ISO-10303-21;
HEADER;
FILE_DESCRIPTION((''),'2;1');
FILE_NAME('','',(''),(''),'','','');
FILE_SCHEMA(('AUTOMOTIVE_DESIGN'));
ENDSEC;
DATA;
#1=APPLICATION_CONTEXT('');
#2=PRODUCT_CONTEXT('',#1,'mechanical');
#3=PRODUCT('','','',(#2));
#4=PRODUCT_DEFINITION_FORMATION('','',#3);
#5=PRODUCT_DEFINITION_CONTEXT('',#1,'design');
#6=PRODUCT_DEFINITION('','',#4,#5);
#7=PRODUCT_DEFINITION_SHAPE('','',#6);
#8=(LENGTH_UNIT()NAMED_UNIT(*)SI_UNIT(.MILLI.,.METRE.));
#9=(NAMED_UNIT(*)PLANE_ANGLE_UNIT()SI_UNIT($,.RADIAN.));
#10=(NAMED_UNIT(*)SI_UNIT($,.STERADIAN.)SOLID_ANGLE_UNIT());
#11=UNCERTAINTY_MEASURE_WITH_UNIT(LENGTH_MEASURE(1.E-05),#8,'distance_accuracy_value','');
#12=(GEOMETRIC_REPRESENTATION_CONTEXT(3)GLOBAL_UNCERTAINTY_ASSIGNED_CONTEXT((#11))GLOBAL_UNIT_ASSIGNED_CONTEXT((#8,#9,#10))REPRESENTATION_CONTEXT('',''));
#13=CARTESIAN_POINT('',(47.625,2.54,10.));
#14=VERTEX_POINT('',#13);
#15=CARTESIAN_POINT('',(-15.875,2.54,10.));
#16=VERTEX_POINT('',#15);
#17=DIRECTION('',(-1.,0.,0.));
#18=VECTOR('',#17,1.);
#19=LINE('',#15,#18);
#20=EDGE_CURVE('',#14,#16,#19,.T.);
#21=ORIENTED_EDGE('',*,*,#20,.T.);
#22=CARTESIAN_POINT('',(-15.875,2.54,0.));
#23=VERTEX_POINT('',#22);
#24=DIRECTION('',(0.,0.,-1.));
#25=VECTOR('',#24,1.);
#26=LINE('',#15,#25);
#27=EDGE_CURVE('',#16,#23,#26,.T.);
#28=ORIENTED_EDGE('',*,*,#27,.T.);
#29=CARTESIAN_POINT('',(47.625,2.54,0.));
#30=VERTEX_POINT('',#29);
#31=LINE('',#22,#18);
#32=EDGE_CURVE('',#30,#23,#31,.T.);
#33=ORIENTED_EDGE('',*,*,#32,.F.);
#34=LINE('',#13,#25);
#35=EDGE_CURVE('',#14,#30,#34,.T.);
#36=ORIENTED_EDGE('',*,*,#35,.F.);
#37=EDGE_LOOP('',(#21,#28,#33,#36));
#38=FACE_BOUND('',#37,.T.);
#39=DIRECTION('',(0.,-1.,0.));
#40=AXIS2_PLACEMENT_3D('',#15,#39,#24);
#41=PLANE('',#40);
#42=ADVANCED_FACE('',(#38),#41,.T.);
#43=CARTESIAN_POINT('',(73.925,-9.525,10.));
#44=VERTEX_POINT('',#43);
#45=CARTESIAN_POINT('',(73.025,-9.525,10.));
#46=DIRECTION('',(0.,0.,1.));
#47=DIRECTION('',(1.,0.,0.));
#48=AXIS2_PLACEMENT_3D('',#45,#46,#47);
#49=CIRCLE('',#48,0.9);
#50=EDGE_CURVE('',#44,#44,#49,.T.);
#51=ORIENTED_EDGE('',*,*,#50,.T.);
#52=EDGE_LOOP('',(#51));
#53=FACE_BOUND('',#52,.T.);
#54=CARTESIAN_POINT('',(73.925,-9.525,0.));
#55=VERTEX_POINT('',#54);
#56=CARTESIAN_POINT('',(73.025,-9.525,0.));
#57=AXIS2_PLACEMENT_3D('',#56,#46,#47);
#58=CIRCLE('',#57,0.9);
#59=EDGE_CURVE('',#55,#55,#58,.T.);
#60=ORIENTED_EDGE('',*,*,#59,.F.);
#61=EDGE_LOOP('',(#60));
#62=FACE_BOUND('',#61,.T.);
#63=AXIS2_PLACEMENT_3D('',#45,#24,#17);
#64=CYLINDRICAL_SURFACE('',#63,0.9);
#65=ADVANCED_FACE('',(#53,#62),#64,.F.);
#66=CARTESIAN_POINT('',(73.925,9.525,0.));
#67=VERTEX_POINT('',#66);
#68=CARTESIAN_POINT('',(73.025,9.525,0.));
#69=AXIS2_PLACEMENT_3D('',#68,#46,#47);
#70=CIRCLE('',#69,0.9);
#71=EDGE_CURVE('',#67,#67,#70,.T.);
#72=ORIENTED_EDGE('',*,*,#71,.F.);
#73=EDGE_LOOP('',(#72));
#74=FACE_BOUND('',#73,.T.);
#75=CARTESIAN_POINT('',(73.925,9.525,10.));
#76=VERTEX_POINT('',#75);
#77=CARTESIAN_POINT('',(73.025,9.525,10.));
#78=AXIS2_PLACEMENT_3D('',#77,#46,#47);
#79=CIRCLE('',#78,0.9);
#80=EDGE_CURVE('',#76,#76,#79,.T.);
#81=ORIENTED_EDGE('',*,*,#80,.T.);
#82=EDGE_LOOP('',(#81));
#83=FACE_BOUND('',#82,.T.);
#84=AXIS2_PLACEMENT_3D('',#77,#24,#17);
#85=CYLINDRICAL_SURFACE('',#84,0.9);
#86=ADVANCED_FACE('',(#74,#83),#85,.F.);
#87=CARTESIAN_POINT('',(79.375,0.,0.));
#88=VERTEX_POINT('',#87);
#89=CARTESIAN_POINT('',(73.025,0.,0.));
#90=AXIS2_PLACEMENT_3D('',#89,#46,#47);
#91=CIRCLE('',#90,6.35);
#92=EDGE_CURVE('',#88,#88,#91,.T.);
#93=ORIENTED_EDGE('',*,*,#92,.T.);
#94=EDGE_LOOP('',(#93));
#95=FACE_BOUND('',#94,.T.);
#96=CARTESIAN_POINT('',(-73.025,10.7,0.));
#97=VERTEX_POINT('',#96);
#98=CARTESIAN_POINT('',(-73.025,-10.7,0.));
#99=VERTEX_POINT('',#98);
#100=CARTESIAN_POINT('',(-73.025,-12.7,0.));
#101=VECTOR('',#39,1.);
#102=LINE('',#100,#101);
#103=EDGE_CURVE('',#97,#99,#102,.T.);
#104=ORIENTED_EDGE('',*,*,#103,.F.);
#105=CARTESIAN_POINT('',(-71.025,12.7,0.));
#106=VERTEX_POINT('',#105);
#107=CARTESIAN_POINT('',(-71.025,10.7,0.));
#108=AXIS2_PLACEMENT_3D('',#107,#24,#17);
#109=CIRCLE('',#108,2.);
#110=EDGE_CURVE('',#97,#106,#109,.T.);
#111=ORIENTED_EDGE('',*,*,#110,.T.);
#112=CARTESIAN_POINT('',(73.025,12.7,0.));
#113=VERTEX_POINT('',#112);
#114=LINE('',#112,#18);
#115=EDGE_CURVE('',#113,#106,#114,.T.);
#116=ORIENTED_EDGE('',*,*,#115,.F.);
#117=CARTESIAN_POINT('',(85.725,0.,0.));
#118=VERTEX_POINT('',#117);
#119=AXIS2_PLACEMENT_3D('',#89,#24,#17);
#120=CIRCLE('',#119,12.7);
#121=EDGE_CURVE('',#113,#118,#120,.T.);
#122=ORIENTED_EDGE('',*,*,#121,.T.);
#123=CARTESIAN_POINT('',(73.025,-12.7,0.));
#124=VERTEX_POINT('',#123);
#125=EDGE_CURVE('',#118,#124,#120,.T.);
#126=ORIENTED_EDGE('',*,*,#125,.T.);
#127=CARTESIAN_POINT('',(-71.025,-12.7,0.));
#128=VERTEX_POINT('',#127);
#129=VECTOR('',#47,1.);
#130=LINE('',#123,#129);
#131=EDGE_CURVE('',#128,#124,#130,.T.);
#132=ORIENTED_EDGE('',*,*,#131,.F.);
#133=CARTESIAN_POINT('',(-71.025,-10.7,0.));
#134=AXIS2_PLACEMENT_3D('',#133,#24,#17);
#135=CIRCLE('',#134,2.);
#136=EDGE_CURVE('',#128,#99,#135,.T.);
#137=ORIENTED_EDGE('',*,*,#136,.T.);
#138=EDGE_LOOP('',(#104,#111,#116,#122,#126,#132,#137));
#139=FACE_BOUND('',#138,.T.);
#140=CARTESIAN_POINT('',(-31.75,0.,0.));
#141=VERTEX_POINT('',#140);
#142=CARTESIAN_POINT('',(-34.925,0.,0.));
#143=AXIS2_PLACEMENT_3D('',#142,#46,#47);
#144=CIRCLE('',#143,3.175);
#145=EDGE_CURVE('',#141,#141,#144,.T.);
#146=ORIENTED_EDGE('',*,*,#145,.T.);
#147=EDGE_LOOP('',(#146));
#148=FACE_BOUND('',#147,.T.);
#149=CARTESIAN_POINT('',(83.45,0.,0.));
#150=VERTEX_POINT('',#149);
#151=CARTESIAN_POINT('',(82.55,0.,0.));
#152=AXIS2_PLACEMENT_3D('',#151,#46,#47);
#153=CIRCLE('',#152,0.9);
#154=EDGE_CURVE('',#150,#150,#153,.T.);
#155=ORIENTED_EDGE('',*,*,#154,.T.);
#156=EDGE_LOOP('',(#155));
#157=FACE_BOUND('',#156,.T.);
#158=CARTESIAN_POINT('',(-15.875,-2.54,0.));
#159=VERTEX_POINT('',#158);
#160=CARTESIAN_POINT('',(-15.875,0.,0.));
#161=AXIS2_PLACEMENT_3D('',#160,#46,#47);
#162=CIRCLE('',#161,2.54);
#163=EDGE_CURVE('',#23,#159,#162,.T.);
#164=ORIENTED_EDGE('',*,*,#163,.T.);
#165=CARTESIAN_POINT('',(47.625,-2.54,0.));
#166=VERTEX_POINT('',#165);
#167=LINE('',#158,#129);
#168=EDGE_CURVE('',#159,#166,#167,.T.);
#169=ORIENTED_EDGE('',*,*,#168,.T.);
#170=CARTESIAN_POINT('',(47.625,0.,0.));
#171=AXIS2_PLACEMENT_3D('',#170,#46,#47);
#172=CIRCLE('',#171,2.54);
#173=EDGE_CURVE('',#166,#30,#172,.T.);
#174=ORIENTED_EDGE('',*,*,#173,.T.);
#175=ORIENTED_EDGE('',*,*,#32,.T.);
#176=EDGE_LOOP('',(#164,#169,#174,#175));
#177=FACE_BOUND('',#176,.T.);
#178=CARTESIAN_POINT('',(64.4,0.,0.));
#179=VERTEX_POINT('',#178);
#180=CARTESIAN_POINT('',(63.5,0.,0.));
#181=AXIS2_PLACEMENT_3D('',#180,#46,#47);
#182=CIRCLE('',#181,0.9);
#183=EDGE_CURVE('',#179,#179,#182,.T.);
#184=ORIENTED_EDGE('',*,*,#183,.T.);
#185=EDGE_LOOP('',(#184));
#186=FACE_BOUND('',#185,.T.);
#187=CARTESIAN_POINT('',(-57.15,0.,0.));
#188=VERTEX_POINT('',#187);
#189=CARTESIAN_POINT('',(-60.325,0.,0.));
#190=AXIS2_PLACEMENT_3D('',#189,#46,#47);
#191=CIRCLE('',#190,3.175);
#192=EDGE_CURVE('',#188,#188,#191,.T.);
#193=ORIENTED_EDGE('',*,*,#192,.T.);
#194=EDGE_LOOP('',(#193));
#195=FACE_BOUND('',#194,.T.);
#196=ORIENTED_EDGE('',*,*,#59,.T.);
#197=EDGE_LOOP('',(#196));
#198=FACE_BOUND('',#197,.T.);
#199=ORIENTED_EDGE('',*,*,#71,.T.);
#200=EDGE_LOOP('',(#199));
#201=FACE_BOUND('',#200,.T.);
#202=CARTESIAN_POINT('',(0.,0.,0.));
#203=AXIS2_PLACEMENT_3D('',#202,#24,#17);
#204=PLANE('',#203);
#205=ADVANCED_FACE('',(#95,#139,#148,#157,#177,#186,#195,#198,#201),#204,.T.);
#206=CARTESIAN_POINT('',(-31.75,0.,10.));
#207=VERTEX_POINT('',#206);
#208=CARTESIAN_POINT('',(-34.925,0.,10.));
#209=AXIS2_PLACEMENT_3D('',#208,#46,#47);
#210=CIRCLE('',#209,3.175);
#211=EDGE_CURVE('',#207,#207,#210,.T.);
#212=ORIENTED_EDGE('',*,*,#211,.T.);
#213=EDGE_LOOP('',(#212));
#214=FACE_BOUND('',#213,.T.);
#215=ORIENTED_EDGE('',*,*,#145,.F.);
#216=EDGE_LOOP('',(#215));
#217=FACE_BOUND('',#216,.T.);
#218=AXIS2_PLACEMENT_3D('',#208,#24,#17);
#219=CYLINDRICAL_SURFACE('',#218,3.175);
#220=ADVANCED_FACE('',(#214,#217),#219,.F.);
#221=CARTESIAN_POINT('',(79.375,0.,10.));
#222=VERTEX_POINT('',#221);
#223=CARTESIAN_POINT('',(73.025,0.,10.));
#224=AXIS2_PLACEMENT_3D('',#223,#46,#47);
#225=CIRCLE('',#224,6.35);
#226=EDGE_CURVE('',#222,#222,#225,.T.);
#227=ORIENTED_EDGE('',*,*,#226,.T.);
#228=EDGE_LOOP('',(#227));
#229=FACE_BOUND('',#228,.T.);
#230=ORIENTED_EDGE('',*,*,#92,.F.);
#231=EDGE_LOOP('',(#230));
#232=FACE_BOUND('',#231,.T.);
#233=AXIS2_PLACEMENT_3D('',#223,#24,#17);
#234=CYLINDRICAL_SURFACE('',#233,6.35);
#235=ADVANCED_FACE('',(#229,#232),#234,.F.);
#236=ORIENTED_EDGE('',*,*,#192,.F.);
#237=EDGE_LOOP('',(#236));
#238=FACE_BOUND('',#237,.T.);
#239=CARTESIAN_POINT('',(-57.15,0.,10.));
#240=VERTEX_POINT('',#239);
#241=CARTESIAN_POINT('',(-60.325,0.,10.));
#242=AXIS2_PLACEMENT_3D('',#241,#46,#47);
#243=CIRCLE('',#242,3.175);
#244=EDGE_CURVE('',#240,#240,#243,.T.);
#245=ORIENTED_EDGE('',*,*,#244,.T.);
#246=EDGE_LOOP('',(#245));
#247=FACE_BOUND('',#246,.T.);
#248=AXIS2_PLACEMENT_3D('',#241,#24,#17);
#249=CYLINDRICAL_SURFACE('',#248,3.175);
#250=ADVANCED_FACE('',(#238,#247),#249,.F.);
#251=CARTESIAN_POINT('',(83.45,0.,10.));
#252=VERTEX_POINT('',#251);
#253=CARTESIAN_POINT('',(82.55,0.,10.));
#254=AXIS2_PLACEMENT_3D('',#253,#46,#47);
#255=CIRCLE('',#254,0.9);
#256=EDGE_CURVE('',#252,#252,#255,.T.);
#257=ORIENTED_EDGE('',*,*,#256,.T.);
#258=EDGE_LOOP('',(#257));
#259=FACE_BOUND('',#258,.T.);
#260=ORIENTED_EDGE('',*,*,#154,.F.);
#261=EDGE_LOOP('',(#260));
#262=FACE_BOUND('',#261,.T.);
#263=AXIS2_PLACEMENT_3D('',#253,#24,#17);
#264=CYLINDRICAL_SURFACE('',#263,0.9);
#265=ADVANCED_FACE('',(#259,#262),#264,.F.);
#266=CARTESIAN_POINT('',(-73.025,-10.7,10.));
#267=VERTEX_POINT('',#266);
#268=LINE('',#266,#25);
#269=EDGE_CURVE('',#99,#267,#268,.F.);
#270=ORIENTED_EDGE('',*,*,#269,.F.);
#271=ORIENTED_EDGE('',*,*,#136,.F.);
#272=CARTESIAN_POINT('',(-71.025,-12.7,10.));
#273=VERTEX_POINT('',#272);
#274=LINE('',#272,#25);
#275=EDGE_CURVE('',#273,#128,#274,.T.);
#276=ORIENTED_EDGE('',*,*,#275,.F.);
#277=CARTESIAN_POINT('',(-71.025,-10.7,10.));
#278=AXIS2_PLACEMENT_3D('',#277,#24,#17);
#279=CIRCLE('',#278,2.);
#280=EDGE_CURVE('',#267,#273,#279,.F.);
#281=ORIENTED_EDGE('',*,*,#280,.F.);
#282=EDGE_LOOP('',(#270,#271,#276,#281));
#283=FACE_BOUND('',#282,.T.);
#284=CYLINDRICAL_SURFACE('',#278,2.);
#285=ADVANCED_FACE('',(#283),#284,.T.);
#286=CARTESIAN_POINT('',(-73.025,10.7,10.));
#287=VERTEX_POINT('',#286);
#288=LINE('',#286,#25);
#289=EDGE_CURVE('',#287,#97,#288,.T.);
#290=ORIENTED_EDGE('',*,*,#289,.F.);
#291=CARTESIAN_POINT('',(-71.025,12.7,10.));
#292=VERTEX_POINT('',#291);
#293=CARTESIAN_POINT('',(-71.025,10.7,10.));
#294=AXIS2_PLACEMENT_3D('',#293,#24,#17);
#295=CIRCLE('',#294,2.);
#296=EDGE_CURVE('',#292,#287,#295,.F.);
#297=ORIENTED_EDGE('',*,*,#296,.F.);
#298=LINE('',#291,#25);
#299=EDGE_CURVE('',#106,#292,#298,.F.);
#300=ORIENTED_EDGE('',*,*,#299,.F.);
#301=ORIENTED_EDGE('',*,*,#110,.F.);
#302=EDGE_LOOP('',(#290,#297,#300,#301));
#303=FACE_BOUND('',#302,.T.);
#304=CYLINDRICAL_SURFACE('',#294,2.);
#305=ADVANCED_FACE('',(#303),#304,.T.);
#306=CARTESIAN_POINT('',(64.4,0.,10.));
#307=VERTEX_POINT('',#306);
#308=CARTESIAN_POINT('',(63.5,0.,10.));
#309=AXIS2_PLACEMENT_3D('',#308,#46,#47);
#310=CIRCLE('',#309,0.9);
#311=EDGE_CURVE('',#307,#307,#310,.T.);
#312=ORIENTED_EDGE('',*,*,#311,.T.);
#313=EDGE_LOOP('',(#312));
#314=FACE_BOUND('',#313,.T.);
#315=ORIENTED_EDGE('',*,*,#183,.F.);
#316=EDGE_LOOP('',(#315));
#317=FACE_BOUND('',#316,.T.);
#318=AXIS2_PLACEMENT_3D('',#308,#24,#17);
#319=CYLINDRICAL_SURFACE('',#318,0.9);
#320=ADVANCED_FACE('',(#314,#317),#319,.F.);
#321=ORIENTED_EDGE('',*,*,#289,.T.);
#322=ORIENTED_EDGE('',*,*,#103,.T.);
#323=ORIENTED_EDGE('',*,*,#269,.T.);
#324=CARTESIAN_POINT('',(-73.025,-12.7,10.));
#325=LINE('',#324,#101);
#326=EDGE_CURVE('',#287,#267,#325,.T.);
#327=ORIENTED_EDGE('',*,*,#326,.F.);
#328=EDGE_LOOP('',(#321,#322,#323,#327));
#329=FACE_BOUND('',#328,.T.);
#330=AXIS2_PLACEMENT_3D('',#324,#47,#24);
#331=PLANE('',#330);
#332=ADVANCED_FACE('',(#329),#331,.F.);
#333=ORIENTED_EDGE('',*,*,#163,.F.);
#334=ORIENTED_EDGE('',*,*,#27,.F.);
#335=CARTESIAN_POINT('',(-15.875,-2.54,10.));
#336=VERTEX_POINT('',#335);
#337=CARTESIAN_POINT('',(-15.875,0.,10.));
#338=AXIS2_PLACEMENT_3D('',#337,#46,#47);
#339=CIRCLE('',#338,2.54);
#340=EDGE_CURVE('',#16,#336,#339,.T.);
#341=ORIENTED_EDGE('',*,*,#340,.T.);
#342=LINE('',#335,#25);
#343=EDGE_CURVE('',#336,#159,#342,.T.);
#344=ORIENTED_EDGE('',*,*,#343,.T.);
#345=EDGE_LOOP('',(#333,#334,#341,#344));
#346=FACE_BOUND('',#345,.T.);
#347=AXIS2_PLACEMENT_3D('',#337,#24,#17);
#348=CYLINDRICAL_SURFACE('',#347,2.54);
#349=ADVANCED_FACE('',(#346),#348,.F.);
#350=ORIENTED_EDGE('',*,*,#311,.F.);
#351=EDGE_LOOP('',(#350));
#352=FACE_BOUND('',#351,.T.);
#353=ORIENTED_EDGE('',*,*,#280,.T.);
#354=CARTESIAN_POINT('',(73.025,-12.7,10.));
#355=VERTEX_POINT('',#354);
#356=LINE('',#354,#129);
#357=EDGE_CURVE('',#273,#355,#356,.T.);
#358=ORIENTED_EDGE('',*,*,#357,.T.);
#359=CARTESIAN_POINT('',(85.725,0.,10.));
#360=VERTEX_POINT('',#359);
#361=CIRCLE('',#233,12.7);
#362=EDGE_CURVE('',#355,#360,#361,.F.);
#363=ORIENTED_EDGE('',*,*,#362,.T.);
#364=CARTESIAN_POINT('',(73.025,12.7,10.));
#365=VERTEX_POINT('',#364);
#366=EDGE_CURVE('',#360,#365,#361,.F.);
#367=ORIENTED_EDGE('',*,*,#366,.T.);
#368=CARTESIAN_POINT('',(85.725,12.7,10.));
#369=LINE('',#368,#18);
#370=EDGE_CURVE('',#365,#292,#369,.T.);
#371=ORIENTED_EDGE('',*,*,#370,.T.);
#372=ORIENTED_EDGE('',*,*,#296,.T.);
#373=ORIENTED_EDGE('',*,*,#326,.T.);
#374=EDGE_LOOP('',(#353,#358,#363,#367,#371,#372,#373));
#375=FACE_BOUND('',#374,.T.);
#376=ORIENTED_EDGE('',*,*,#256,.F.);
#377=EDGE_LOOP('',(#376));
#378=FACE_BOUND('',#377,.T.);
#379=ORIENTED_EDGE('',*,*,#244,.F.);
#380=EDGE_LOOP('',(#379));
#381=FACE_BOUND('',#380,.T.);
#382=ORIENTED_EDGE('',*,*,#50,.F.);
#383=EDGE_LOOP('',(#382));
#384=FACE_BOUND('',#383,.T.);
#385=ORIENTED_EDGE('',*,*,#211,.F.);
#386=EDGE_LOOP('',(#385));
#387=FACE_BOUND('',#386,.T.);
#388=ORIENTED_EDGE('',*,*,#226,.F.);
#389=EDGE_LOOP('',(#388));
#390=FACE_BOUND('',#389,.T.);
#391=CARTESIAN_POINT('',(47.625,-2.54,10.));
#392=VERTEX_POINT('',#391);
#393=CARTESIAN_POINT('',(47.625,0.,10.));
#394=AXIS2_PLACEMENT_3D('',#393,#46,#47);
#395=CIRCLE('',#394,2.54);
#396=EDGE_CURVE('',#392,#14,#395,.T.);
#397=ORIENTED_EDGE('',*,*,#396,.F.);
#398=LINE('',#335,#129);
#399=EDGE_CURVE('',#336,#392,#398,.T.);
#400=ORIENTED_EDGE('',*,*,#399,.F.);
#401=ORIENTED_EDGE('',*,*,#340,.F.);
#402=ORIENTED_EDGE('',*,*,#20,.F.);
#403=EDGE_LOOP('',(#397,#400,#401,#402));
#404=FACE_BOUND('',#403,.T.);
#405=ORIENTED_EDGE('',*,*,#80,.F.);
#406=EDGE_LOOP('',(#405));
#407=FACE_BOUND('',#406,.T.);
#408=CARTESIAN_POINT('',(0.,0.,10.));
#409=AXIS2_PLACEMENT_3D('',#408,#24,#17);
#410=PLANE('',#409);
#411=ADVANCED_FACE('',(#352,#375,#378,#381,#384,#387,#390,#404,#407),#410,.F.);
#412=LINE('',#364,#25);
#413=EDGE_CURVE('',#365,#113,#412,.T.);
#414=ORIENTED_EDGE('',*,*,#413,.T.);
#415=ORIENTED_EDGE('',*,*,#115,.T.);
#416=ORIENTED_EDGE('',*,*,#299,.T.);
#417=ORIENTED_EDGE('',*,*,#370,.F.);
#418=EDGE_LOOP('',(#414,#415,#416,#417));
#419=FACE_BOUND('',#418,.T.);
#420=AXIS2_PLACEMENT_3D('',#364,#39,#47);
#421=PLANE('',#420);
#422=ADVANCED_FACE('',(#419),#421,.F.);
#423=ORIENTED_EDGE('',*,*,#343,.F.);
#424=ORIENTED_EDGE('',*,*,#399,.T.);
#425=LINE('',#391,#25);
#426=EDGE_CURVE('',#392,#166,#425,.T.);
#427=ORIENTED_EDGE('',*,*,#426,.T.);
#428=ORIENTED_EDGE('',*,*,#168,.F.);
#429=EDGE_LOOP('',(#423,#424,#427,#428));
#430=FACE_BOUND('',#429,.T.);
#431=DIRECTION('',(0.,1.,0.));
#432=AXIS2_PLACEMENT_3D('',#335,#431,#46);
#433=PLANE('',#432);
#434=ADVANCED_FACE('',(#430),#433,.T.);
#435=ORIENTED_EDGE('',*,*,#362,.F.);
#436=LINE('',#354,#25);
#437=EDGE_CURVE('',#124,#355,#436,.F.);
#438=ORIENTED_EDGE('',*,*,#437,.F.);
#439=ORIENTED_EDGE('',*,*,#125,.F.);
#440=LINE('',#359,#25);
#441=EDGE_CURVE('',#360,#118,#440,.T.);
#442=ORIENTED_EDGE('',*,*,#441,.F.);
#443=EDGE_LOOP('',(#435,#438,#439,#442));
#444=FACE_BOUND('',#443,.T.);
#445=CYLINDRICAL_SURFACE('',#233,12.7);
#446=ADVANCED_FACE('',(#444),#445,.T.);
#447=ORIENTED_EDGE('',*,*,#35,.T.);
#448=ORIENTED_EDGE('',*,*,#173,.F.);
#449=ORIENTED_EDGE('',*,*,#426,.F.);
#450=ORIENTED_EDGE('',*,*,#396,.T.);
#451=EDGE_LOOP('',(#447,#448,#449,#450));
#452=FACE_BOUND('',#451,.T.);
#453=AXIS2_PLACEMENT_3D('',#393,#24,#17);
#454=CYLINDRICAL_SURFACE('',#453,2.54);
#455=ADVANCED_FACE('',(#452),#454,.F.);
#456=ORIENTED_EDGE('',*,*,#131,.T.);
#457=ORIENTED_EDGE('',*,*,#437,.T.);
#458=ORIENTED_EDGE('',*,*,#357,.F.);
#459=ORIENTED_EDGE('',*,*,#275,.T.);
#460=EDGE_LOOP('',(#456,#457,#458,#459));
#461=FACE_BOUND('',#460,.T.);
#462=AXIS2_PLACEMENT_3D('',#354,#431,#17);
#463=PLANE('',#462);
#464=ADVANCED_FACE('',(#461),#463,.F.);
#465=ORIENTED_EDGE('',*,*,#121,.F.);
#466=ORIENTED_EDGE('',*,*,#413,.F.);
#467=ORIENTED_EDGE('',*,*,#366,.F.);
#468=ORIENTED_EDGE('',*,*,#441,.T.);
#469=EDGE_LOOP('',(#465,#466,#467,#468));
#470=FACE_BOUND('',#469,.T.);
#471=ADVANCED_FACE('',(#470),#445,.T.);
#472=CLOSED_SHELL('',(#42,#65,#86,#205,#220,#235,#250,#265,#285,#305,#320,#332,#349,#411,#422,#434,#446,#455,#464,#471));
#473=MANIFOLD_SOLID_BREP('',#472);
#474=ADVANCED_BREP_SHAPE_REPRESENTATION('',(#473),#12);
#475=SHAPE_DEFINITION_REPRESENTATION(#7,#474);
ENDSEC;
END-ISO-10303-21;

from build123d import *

# Parameters (mm, degrees)
SKETCH1_R           = 3.175
SKETCH1_R_2         = 6.35
SKETCH1_R_3         = 0.9
BOSS_EXTRUDE1_DEPTH = 10
FILLET2_R           = 2
FILLET3_R           = 12.7


with BuildPart() as part:
    # Sketch1 → Boss-Extrude1 (new body)
    with BuildSketch(Plane.XY):
        Polygon((-73.025, -12.7), (-73.025, 12.7), (73.025, 12.7), (85.725, 12.7), (85.725, -12.7), (73.025, -12.7), align=None)
        with Locations((-60.325, 0)):
            Circle(SKETCH1_R, mode=Mode.SUBTRACT)
        with Locations((73.025, 0)):
            Circle(SKETCH1_R_2, mode=Mode.SUBTRACT)
        with Locations((73.025, 9.525)):
            Circle(SKETCH1_R_3, mode=Mode.SUBTRACT)
        with Locations((73.025, -9.525)):
            Circle(SKETCH1_R_3, mode=Mode.SUBTRACT)
        with Locations((63.5, 0)):
            Circle(SKETCH1_R_3, mode=Mode.SUBTRACT)
        with Locations((82.55, 0)):
            Circle(SKETCH1_R_3, mode=Mode.SUBTRACT)
        with Locations((-34.925, 0)):
            Circle(SKETCH1_R, mode=Mode.SUBTRACT)
        with BuildLine():
            Line((-15.875, 2.54), (47.625, 2.54))
            ThreePointArc((47.625, 2.54), (50.165, 0), (47.625, -2.54))
            Line((47.625, -2.54), (-15.875, -2.54))
            ThreePointArc((-15.875, -2.54), (-18.415, 0), (-15.875, 2.54))
        make_face(mode=Mode.SUBTRACT)
    extrude(amount=BOSS_EXTRUDE1_DEPTH)

    # Fillet2
    fillet2_edges = [part.edges().sort_by_distance(p)[0] for p in [
        (-73.025, -12.7, 5),
        (-73.025, 12.7, 5),
    ]]
    fillet(fillet2_edges, radius=FILLET2_R)

    # Fillet3
    fillet3_edges = [part.edges().sort_by_distance(p)[0] for p in [
        (85.725, 12.7, 5),
        (85.725, -12.7, 5),
    ]]
    fillet(fillet3_edges, radius=FILLET3_R - 0.0001)  # a hair under: the kernel refuses the full size


solid = part.part
